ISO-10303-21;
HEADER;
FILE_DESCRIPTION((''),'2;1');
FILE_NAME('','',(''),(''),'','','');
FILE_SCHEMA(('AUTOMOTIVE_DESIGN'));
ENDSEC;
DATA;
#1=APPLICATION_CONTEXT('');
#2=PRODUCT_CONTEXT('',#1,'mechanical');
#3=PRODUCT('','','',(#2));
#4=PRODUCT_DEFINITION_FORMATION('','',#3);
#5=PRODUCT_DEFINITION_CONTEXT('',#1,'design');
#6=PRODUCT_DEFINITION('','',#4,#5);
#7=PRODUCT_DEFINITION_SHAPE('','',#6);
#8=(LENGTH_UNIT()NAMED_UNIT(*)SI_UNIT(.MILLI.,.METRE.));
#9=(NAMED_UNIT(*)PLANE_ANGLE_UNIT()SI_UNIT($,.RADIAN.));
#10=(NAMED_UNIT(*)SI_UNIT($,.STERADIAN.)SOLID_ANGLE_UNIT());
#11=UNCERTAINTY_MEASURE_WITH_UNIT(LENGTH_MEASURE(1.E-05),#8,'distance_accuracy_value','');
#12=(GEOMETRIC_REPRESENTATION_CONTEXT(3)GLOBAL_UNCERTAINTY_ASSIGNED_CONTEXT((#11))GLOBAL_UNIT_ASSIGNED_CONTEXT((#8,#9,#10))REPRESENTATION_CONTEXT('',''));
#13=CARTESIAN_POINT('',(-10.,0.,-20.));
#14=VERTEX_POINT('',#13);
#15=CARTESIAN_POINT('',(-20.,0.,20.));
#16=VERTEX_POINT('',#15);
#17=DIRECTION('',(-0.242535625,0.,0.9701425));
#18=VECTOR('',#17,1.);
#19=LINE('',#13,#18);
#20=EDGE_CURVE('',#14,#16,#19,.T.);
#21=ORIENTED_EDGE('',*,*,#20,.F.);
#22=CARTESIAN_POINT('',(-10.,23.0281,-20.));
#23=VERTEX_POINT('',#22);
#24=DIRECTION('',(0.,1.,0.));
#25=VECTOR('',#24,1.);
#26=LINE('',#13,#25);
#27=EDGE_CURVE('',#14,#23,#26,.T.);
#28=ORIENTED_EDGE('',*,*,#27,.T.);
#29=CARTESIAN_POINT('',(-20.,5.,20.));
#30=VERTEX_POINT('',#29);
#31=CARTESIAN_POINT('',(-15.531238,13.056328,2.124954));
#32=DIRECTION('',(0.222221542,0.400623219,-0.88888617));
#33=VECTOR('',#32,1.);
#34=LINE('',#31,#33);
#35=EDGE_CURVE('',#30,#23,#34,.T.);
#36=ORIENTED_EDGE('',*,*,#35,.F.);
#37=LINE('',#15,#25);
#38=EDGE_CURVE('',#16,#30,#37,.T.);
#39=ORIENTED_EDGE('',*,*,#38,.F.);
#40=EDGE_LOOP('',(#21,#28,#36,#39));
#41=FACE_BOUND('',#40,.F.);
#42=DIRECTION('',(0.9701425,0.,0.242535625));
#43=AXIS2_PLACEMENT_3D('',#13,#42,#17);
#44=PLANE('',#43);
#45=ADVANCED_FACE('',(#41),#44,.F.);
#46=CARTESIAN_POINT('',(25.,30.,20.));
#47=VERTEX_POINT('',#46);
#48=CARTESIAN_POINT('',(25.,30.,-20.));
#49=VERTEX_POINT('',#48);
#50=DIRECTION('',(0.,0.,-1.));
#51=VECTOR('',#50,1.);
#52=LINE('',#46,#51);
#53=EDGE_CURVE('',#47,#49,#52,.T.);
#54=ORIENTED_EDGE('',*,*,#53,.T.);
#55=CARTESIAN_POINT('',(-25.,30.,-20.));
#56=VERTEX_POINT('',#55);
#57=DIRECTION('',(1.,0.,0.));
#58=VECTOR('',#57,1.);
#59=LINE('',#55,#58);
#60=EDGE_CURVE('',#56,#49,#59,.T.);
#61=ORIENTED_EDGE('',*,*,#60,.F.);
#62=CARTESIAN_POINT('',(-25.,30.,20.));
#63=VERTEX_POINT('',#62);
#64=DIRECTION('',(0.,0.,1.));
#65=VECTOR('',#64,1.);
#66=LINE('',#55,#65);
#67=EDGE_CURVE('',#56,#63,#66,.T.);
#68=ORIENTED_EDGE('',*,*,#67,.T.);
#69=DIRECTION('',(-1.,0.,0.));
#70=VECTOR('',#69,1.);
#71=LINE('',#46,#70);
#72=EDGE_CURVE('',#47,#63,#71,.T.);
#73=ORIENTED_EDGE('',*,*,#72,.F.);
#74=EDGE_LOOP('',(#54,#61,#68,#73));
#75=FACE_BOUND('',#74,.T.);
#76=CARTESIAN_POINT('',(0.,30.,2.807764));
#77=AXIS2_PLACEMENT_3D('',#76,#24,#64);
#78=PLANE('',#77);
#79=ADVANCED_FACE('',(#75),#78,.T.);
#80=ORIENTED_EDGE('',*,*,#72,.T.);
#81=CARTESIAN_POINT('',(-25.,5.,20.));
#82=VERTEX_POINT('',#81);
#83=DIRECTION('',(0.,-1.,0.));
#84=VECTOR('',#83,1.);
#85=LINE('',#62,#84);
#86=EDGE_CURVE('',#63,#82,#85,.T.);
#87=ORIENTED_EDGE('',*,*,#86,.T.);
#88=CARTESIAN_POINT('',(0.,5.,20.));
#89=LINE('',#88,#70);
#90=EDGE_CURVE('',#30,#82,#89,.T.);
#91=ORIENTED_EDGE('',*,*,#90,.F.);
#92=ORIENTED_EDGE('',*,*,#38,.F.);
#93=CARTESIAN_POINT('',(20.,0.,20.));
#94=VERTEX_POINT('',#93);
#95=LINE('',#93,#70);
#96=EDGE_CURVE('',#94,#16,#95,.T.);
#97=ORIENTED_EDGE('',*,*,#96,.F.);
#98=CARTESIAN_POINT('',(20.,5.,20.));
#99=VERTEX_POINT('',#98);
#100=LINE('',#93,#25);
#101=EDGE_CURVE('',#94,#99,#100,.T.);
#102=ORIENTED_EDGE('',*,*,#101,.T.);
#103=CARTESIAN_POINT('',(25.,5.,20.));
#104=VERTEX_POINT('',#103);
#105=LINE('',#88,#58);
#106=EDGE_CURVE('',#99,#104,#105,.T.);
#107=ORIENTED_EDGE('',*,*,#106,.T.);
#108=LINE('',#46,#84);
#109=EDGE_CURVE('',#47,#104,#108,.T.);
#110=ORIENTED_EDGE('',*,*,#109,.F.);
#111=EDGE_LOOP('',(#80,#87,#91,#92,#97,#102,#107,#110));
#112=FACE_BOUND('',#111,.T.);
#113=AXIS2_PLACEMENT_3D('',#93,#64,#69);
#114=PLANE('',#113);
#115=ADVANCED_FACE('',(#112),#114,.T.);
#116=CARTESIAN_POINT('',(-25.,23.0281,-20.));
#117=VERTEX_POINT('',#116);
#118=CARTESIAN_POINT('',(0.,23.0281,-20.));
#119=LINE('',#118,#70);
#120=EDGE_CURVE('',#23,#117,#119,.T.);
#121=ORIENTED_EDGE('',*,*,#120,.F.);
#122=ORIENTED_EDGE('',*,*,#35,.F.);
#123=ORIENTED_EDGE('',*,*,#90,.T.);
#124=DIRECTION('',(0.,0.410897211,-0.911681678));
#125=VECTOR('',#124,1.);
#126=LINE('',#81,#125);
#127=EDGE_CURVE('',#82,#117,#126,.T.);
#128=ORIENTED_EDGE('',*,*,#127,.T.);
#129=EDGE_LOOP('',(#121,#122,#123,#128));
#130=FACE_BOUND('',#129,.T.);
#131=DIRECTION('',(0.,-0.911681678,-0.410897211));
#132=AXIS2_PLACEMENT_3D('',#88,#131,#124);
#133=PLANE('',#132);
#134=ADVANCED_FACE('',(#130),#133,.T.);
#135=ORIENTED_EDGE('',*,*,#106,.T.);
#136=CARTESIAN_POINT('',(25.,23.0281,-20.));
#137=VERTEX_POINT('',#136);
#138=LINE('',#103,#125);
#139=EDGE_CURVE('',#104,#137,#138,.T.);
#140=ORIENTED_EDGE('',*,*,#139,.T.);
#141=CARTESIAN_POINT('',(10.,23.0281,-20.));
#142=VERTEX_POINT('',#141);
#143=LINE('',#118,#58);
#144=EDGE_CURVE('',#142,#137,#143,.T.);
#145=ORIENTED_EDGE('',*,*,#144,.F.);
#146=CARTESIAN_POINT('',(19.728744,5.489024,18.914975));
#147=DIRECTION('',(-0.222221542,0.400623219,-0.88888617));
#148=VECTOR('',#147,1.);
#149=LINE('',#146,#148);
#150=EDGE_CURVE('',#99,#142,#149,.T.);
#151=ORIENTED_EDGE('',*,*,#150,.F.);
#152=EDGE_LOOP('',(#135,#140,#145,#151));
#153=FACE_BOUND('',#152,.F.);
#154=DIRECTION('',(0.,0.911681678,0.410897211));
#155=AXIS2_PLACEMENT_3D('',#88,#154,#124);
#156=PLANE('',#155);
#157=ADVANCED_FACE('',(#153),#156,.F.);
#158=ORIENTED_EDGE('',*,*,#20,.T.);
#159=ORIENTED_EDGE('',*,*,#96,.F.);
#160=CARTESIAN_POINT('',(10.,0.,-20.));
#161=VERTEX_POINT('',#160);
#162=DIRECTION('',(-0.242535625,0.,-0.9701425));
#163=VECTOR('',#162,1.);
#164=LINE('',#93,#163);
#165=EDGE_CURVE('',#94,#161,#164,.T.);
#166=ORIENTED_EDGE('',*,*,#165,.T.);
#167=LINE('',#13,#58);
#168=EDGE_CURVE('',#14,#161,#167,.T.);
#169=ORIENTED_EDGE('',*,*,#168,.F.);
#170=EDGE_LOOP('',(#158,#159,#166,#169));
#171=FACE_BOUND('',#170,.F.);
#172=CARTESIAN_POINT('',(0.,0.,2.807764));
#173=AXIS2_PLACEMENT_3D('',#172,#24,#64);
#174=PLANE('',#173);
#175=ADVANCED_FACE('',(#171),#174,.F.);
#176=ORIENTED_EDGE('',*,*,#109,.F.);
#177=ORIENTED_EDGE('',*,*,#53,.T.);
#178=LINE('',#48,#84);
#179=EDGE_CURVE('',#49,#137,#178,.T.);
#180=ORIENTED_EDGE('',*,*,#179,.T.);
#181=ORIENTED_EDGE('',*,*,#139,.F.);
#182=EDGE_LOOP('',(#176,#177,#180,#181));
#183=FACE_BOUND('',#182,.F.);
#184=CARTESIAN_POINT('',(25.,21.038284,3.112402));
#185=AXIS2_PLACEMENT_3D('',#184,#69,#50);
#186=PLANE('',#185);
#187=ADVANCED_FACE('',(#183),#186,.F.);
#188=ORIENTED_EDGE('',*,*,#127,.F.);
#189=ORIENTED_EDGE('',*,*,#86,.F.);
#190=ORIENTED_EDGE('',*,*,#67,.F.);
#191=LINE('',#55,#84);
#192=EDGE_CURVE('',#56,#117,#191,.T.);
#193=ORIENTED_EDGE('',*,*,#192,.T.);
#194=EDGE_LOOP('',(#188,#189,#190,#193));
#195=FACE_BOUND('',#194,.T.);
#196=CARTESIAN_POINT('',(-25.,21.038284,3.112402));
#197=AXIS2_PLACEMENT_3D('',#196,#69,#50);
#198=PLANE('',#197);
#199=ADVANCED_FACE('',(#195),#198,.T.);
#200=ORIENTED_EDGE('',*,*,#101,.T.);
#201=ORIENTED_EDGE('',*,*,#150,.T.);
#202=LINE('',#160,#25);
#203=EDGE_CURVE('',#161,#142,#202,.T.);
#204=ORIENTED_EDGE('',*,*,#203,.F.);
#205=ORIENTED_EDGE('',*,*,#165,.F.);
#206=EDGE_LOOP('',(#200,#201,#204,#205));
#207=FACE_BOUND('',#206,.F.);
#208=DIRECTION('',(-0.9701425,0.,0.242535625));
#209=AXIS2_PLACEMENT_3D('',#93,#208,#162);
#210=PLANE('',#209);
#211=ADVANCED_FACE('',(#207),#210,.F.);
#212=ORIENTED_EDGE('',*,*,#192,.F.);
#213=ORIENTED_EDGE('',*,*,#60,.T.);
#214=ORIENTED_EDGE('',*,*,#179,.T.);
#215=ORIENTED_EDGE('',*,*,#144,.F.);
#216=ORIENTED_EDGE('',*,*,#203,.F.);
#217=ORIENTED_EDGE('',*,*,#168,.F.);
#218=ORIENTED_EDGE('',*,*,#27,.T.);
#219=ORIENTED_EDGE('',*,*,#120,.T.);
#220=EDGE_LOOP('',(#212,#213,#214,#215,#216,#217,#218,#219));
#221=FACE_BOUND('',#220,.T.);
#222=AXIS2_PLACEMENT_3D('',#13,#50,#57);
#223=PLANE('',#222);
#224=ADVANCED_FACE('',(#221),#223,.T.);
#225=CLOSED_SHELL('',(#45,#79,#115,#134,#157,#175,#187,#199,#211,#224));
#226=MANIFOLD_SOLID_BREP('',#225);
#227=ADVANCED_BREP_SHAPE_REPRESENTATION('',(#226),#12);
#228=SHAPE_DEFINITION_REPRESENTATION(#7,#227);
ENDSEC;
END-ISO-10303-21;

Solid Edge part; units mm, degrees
sketch "Sketch1" plane through (0, 0, 0) normal (0, -1, 0) x (1, 0, 0)
  line L0 (20, 20) -> (10, -20)
  line L1 (-10, -20) -> (10, -20)
  line L2 (-10, -20) -> (-20, 20)
  line L3 (20, 20) -> (-20, 20)
extrude "Protrusion1" add sketch "Sketch1" against normal blind 30
sketch "Sketch2" plane through (0, 0, 0) normal (1, 0, 0) x (0, 1, 0)
  line L0 (30, -20) -> (23.0281, -20)
  line L1 (5, 20) -> (23.0281, -20)
  line L2 (30, 20) -> (5, 20)
  line L3 (30, -13.924) -> (30, 20)
extrude "ExtrudedProtrusion_3" add sketch "Sketch2" along normal blind 25 material side at (0, 26.514, -19.95)
sketch "Sketch3" plane through (0, 0, 0) normal (1, 0, 0) x (0, 1, 0)
  line L0 (30, -20) -> (23.0281, -20)
  line L1 (5, 20) -> (23.0281, -20)
  line L2 (30, 20) -> (5, 20)
  line L3 (30, -13.924) -> (30, 20)
extrude "ExtrudedProtrusion_4" add sketch "Sketch3" against normal blind 25 material side at (0, 26.514, -19.95)
